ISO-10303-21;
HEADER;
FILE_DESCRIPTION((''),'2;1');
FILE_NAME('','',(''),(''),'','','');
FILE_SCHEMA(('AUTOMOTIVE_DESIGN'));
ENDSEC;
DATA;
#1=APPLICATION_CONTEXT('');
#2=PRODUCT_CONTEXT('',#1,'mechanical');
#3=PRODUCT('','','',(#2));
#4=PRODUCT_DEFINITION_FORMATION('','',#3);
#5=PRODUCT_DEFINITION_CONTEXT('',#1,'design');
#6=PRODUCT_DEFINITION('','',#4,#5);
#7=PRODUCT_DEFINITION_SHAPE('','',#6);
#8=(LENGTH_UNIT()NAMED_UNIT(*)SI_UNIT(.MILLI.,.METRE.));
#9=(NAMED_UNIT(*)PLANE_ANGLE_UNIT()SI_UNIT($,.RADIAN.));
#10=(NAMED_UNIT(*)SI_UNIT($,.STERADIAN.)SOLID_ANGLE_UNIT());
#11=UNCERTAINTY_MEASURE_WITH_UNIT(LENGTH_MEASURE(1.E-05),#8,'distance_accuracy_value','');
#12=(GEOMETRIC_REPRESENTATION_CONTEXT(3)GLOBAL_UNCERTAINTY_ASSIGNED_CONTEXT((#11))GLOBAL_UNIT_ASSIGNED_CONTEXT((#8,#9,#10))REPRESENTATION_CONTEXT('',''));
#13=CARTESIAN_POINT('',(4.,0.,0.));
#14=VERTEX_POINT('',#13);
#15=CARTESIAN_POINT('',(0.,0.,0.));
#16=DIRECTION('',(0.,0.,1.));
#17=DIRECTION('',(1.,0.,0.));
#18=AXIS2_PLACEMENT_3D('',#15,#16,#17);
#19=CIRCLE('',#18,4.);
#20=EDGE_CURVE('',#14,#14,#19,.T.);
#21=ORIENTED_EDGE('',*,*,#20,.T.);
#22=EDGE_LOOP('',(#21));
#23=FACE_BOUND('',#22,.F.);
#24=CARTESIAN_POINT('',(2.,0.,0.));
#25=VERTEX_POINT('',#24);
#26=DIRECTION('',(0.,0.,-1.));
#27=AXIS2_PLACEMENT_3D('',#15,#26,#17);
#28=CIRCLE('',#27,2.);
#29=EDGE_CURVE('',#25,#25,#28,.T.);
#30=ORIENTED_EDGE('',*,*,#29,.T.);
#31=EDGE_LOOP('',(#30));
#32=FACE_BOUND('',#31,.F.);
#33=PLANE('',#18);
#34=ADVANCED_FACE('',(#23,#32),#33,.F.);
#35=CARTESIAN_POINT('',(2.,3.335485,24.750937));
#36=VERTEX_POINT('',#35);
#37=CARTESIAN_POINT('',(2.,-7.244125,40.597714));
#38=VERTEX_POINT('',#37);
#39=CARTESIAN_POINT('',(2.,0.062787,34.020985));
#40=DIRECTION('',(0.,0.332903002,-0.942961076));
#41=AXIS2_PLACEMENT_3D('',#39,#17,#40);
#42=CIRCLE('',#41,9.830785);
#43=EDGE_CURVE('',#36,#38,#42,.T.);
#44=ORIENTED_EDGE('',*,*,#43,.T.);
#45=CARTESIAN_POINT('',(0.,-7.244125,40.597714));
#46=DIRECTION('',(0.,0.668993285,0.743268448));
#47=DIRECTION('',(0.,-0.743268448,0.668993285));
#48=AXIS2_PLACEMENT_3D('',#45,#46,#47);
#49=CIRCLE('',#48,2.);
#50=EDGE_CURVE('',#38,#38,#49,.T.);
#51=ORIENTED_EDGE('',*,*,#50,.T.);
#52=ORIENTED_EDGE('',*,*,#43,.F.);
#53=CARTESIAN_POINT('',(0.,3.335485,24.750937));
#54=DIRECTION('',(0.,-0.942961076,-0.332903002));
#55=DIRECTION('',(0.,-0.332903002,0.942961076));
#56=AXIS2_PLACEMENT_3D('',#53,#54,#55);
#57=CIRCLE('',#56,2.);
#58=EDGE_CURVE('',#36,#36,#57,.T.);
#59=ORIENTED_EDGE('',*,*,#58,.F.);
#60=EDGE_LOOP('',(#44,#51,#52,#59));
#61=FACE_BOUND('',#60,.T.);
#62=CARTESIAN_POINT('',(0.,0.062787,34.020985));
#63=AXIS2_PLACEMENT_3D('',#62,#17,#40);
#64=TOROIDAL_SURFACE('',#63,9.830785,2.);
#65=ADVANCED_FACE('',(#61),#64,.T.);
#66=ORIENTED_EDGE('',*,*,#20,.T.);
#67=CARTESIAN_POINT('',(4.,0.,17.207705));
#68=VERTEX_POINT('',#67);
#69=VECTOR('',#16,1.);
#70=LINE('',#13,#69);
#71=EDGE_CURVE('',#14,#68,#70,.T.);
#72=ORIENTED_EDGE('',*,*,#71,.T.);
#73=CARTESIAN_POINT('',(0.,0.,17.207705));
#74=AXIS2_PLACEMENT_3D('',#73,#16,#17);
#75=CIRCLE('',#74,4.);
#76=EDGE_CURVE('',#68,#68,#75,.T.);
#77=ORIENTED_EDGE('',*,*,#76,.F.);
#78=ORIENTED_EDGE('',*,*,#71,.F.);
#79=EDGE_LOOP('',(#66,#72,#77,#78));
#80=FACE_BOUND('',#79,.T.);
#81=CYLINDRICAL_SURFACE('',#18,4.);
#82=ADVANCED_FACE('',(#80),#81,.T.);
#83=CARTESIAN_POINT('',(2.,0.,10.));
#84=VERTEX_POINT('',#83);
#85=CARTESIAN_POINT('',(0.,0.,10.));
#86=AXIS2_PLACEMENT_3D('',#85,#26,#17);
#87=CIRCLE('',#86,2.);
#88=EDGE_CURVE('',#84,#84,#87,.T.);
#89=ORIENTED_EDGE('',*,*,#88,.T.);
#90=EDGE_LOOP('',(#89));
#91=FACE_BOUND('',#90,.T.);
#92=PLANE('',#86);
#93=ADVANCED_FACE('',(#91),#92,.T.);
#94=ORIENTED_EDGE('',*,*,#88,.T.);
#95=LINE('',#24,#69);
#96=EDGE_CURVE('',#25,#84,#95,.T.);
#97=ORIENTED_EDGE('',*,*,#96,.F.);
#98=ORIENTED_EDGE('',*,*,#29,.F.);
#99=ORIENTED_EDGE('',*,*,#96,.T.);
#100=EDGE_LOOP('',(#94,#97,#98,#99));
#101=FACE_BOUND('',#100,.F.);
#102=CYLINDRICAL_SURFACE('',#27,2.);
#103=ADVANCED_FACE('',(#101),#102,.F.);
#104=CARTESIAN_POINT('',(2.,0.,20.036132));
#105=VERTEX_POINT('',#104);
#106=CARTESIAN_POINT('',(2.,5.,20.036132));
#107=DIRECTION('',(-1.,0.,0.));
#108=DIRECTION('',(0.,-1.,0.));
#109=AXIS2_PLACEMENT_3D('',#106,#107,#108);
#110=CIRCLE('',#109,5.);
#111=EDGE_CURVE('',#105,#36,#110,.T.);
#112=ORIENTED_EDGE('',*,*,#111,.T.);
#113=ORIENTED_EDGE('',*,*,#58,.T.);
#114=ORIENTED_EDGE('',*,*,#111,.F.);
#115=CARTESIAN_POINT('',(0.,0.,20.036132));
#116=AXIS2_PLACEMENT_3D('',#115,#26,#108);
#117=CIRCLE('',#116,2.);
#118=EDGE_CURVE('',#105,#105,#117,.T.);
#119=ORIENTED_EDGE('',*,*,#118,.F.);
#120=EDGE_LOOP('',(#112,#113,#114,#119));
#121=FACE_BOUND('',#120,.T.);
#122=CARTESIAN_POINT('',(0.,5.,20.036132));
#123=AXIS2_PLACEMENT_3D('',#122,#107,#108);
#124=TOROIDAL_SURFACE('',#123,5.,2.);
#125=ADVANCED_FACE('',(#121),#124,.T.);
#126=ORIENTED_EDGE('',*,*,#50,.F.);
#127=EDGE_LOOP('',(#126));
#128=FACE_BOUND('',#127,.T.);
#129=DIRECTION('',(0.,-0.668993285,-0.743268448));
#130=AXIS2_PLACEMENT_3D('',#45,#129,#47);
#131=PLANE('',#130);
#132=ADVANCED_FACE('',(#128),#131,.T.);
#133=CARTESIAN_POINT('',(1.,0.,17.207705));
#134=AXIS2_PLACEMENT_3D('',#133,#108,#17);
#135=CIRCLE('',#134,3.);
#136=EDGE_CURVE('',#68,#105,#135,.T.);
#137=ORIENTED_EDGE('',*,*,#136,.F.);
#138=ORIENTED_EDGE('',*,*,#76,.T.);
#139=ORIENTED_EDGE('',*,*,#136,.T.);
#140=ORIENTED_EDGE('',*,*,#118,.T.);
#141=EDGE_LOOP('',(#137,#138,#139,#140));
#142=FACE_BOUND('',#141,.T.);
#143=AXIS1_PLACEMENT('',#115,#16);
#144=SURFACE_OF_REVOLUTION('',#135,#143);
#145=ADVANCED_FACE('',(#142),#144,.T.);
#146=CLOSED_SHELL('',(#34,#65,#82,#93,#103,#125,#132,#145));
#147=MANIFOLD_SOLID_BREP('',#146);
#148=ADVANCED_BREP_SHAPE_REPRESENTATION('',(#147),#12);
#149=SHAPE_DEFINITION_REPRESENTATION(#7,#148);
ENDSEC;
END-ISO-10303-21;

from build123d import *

# Parameters (mm, degrees)
F0_R     = 4
F3_R     = 2
F6_R     = 2
F7_DEPTH = 10


# Not quite as in the source:
# - a fillet or chamfer that OpenCascade refuses, or shapes differently, is made with other operations: its cross-section is extruded or revolved along the edge and cut away or added


with BuildPart() as f2:
    # F2: sweep along a path in F1
    with BuildLine(Plane.YZ) as f2_path:
        Line((0, 0), (0, 20.0361318752))
    # F0 (on Top) → F2 (sweep)
    with BuildSketch(Plane.XY):
        Circle(F0_R)
    sweep(path=f2_path.line)

    # F4: sweep along a path in F1
    with BuildLine(Plane.YZ) as f4_path:
        ThreePointArc((0, 20.0361318752), (0.9181759559, 22.9238147652), (3.3354849893, 24.7509372561))
        ThreePointArc((3.3354849893, 24.7509372561), (8.2388991441, 39.4795133809), (-7.2441254742, 40.5977144837))
    # F3 (on face) → F4 (sweep)
    with BuildSketch(Plane.XY.offset(20.0361318752)):
        Circle(F3_R)
    sweep(path=f4_path.line)

    # F5: fillet of radius 3 on 1 edges, made by hand

    # F5_s1 → F5_t2 (revolve, cut)
    with BuildSketch(Plane.XZ):
        with BuildLine():
            ThreePointArc((4, 17.2077047505), (3.4494897428, 18.939755558), (2, 20.0361318752))
            Line((2, 20.0361318752), (2.02, 20.0927004177))
            ThreePointArc((2.02, 20.0927004177), (3, 20.0961318752), (4, 20.0961318752))
            Line((4, 20.0961318752), (4.06, 20.0361318752))
            Line((4.06, 20.0361318752), (4.06, 17.2077047505))
            Line((4.06, 17.2077047505), (4, 17.2077047505))
        make_face()
    revolve(axis=Axis((0, 0, 20.0361318752), (0, 0, 1)), mode=Mode.SUBTRACT)

    # F6 (on face) → F7 (cut)
    with BuildSketch(Plane(origin=(0, 0, 0), x_dir=(1, 0, 0), z_dir=(0, 0, -1))):
        Circle(F6_R)
    extrude(amount=-F7_DEPTH, mode=Mode.SUBTRACT)


solid = f2.part
